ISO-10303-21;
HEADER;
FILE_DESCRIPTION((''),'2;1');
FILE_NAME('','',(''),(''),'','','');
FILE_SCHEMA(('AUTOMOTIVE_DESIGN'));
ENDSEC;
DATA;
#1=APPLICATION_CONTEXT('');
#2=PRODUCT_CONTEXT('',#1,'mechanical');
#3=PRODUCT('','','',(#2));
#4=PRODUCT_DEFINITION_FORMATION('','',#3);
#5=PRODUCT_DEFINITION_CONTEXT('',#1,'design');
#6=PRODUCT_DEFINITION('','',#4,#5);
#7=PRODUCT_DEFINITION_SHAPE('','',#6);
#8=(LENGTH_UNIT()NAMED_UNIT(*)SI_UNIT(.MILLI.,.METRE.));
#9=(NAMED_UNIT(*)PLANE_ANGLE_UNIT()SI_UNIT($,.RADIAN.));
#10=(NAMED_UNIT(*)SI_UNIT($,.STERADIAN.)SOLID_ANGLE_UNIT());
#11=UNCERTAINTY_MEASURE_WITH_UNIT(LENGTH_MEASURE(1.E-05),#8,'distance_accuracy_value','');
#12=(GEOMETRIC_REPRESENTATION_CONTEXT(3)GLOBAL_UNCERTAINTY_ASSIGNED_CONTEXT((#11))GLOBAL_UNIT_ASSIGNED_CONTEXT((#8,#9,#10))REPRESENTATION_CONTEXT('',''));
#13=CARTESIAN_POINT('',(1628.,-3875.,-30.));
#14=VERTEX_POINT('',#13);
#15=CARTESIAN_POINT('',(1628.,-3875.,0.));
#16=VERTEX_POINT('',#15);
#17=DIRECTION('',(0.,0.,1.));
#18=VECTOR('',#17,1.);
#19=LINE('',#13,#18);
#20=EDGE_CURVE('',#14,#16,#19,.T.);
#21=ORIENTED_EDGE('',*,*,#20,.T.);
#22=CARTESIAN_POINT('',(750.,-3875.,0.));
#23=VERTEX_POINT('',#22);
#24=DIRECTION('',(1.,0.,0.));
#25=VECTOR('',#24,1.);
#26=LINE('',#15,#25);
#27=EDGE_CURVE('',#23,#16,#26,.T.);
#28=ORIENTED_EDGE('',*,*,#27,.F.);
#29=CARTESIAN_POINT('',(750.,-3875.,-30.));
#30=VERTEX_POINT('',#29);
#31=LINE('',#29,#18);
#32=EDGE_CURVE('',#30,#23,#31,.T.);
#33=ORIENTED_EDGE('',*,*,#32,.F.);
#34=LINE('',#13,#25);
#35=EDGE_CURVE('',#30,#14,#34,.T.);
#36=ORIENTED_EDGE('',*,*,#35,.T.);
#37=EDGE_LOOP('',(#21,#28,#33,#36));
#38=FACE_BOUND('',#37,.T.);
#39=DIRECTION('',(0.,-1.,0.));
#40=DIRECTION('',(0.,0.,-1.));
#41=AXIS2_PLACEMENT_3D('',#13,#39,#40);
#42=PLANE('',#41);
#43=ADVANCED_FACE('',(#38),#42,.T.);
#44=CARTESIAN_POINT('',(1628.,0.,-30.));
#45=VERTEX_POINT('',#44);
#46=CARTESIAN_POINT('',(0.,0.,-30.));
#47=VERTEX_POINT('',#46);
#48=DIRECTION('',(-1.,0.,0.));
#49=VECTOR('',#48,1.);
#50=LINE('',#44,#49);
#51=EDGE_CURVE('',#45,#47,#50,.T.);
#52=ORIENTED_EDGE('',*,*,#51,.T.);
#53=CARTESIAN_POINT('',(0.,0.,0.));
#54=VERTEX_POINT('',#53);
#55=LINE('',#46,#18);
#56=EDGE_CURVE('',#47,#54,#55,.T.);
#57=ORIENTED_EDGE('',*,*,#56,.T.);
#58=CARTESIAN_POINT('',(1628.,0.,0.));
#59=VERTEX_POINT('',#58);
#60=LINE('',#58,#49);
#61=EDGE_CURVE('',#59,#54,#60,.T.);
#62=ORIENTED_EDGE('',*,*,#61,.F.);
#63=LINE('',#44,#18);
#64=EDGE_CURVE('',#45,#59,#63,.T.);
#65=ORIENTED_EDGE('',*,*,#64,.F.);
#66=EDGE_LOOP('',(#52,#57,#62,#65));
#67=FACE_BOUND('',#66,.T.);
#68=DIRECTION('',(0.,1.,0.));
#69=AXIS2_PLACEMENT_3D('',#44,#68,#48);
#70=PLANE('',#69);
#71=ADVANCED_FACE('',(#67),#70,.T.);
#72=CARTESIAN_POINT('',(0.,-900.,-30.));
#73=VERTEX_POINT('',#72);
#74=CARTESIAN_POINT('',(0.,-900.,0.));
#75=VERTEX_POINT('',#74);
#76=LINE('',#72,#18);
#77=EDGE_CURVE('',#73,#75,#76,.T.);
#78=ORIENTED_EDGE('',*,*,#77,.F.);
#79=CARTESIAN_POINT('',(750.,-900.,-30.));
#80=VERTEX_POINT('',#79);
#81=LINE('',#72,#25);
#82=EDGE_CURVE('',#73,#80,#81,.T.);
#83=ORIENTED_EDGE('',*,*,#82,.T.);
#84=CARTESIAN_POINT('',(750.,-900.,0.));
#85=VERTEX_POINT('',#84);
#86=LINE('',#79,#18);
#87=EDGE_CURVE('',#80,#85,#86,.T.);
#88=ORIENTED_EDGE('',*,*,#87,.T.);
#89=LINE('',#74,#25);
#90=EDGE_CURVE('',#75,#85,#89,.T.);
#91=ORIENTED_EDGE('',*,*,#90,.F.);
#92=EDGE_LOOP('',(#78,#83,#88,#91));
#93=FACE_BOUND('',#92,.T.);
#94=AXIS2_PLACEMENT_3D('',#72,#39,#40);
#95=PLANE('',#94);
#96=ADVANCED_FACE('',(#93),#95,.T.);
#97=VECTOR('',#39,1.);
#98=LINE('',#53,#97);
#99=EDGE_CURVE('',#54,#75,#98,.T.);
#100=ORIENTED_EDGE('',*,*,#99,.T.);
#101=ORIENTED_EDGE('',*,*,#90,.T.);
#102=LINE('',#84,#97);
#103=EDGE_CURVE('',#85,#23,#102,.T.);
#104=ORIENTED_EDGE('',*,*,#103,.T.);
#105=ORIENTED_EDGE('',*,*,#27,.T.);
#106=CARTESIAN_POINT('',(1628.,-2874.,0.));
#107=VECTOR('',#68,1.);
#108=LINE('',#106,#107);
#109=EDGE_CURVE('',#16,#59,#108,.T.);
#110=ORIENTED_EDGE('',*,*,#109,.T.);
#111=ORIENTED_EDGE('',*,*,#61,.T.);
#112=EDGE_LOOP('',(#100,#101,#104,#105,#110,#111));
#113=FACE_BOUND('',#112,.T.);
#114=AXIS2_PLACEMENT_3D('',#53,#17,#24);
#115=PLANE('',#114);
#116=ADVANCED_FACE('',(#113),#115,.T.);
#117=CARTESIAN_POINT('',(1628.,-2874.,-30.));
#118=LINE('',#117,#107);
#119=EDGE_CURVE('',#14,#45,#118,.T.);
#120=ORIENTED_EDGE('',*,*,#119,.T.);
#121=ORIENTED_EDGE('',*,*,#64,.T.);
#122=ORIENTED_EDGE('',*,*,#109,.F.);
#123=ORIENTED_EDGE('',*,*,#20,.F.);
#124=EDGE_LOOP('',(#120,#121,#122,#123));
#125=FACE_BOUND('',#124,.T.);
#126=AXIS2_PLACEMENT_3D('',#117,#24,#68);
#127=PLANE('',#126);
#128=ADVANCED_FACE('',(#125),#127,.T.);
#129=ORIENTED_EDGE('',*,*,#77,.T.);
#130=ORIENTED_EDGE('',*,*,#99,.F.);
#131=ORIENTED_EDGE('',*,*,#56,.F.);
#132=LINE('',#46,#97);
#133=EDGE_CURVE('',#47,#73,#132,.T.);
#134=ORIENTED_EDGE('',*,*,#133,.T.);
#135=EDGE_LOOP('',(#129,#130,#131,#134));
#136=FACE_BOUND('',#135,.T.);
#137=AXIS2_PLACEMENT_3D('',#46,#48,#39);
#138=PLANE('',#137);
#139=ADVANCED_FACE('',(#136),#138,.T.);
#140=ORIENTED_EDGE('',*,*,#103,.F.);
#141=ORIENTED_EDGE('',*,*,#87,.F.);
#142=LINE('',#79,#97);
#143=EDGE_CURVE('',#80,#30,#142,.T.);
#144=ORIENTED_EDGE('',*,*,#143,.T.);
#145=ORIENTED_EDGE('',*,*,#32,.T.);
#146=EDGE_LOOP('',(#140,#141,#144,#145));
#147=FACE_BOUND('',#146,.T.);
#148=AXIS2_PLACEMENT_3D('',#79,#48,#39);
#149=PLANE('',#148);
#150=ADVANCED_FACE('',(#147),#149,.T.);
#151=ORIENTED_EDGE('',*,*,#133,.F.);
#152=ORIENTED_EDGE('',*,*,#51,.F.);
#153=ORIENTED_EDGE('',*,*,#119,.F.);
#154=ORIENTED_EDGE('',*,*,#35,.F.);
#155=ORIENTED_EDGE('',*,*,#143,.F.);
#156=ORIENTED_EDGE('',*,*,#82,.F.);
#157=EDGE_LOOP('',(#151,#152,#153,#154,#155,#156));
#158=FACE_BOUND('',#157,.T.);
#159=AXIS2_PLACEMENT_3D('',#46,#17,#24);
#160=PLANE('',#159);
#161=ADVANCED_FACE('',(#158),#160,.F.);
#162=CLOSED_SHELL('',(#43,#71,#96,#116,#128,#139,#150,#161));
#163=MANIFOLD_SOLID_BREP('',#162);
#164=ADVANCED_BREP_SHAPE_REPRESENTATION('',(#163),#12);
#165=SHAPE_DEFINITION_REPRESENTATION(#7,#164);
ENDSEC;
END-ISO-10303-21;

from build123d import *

# Parameters (mm, degrees)
TABAN_FLAN_1_DEPTH = 30
IZIM3_W            = 878
IZIM3_H            = 1001
SEKME1_DEPTH       = 30


# Sheet-metal steps are written as plain solids
with BuildPart() as part:
    # Çizim1 → Taban-Flanş1 (new body)
    with BuildSketch(Plane.XY):
        Polygon((0, 0), (0, -900), (750, -900), (750, -2874), (1628, -2874), (1628, 0), align=None)
    extrude(amount=-TABAN_FLAN_1_DEPTH)

    # Çizim3 → Sekme1 (add)
    with BuildSketch(Plane.XY):
        with Locations((1189, -3374.5)):
            Rectangle(IZIM3_W, IZIM3_H)
    extrude(amount=-SEKME1_DEPTH)


solid = part.part
